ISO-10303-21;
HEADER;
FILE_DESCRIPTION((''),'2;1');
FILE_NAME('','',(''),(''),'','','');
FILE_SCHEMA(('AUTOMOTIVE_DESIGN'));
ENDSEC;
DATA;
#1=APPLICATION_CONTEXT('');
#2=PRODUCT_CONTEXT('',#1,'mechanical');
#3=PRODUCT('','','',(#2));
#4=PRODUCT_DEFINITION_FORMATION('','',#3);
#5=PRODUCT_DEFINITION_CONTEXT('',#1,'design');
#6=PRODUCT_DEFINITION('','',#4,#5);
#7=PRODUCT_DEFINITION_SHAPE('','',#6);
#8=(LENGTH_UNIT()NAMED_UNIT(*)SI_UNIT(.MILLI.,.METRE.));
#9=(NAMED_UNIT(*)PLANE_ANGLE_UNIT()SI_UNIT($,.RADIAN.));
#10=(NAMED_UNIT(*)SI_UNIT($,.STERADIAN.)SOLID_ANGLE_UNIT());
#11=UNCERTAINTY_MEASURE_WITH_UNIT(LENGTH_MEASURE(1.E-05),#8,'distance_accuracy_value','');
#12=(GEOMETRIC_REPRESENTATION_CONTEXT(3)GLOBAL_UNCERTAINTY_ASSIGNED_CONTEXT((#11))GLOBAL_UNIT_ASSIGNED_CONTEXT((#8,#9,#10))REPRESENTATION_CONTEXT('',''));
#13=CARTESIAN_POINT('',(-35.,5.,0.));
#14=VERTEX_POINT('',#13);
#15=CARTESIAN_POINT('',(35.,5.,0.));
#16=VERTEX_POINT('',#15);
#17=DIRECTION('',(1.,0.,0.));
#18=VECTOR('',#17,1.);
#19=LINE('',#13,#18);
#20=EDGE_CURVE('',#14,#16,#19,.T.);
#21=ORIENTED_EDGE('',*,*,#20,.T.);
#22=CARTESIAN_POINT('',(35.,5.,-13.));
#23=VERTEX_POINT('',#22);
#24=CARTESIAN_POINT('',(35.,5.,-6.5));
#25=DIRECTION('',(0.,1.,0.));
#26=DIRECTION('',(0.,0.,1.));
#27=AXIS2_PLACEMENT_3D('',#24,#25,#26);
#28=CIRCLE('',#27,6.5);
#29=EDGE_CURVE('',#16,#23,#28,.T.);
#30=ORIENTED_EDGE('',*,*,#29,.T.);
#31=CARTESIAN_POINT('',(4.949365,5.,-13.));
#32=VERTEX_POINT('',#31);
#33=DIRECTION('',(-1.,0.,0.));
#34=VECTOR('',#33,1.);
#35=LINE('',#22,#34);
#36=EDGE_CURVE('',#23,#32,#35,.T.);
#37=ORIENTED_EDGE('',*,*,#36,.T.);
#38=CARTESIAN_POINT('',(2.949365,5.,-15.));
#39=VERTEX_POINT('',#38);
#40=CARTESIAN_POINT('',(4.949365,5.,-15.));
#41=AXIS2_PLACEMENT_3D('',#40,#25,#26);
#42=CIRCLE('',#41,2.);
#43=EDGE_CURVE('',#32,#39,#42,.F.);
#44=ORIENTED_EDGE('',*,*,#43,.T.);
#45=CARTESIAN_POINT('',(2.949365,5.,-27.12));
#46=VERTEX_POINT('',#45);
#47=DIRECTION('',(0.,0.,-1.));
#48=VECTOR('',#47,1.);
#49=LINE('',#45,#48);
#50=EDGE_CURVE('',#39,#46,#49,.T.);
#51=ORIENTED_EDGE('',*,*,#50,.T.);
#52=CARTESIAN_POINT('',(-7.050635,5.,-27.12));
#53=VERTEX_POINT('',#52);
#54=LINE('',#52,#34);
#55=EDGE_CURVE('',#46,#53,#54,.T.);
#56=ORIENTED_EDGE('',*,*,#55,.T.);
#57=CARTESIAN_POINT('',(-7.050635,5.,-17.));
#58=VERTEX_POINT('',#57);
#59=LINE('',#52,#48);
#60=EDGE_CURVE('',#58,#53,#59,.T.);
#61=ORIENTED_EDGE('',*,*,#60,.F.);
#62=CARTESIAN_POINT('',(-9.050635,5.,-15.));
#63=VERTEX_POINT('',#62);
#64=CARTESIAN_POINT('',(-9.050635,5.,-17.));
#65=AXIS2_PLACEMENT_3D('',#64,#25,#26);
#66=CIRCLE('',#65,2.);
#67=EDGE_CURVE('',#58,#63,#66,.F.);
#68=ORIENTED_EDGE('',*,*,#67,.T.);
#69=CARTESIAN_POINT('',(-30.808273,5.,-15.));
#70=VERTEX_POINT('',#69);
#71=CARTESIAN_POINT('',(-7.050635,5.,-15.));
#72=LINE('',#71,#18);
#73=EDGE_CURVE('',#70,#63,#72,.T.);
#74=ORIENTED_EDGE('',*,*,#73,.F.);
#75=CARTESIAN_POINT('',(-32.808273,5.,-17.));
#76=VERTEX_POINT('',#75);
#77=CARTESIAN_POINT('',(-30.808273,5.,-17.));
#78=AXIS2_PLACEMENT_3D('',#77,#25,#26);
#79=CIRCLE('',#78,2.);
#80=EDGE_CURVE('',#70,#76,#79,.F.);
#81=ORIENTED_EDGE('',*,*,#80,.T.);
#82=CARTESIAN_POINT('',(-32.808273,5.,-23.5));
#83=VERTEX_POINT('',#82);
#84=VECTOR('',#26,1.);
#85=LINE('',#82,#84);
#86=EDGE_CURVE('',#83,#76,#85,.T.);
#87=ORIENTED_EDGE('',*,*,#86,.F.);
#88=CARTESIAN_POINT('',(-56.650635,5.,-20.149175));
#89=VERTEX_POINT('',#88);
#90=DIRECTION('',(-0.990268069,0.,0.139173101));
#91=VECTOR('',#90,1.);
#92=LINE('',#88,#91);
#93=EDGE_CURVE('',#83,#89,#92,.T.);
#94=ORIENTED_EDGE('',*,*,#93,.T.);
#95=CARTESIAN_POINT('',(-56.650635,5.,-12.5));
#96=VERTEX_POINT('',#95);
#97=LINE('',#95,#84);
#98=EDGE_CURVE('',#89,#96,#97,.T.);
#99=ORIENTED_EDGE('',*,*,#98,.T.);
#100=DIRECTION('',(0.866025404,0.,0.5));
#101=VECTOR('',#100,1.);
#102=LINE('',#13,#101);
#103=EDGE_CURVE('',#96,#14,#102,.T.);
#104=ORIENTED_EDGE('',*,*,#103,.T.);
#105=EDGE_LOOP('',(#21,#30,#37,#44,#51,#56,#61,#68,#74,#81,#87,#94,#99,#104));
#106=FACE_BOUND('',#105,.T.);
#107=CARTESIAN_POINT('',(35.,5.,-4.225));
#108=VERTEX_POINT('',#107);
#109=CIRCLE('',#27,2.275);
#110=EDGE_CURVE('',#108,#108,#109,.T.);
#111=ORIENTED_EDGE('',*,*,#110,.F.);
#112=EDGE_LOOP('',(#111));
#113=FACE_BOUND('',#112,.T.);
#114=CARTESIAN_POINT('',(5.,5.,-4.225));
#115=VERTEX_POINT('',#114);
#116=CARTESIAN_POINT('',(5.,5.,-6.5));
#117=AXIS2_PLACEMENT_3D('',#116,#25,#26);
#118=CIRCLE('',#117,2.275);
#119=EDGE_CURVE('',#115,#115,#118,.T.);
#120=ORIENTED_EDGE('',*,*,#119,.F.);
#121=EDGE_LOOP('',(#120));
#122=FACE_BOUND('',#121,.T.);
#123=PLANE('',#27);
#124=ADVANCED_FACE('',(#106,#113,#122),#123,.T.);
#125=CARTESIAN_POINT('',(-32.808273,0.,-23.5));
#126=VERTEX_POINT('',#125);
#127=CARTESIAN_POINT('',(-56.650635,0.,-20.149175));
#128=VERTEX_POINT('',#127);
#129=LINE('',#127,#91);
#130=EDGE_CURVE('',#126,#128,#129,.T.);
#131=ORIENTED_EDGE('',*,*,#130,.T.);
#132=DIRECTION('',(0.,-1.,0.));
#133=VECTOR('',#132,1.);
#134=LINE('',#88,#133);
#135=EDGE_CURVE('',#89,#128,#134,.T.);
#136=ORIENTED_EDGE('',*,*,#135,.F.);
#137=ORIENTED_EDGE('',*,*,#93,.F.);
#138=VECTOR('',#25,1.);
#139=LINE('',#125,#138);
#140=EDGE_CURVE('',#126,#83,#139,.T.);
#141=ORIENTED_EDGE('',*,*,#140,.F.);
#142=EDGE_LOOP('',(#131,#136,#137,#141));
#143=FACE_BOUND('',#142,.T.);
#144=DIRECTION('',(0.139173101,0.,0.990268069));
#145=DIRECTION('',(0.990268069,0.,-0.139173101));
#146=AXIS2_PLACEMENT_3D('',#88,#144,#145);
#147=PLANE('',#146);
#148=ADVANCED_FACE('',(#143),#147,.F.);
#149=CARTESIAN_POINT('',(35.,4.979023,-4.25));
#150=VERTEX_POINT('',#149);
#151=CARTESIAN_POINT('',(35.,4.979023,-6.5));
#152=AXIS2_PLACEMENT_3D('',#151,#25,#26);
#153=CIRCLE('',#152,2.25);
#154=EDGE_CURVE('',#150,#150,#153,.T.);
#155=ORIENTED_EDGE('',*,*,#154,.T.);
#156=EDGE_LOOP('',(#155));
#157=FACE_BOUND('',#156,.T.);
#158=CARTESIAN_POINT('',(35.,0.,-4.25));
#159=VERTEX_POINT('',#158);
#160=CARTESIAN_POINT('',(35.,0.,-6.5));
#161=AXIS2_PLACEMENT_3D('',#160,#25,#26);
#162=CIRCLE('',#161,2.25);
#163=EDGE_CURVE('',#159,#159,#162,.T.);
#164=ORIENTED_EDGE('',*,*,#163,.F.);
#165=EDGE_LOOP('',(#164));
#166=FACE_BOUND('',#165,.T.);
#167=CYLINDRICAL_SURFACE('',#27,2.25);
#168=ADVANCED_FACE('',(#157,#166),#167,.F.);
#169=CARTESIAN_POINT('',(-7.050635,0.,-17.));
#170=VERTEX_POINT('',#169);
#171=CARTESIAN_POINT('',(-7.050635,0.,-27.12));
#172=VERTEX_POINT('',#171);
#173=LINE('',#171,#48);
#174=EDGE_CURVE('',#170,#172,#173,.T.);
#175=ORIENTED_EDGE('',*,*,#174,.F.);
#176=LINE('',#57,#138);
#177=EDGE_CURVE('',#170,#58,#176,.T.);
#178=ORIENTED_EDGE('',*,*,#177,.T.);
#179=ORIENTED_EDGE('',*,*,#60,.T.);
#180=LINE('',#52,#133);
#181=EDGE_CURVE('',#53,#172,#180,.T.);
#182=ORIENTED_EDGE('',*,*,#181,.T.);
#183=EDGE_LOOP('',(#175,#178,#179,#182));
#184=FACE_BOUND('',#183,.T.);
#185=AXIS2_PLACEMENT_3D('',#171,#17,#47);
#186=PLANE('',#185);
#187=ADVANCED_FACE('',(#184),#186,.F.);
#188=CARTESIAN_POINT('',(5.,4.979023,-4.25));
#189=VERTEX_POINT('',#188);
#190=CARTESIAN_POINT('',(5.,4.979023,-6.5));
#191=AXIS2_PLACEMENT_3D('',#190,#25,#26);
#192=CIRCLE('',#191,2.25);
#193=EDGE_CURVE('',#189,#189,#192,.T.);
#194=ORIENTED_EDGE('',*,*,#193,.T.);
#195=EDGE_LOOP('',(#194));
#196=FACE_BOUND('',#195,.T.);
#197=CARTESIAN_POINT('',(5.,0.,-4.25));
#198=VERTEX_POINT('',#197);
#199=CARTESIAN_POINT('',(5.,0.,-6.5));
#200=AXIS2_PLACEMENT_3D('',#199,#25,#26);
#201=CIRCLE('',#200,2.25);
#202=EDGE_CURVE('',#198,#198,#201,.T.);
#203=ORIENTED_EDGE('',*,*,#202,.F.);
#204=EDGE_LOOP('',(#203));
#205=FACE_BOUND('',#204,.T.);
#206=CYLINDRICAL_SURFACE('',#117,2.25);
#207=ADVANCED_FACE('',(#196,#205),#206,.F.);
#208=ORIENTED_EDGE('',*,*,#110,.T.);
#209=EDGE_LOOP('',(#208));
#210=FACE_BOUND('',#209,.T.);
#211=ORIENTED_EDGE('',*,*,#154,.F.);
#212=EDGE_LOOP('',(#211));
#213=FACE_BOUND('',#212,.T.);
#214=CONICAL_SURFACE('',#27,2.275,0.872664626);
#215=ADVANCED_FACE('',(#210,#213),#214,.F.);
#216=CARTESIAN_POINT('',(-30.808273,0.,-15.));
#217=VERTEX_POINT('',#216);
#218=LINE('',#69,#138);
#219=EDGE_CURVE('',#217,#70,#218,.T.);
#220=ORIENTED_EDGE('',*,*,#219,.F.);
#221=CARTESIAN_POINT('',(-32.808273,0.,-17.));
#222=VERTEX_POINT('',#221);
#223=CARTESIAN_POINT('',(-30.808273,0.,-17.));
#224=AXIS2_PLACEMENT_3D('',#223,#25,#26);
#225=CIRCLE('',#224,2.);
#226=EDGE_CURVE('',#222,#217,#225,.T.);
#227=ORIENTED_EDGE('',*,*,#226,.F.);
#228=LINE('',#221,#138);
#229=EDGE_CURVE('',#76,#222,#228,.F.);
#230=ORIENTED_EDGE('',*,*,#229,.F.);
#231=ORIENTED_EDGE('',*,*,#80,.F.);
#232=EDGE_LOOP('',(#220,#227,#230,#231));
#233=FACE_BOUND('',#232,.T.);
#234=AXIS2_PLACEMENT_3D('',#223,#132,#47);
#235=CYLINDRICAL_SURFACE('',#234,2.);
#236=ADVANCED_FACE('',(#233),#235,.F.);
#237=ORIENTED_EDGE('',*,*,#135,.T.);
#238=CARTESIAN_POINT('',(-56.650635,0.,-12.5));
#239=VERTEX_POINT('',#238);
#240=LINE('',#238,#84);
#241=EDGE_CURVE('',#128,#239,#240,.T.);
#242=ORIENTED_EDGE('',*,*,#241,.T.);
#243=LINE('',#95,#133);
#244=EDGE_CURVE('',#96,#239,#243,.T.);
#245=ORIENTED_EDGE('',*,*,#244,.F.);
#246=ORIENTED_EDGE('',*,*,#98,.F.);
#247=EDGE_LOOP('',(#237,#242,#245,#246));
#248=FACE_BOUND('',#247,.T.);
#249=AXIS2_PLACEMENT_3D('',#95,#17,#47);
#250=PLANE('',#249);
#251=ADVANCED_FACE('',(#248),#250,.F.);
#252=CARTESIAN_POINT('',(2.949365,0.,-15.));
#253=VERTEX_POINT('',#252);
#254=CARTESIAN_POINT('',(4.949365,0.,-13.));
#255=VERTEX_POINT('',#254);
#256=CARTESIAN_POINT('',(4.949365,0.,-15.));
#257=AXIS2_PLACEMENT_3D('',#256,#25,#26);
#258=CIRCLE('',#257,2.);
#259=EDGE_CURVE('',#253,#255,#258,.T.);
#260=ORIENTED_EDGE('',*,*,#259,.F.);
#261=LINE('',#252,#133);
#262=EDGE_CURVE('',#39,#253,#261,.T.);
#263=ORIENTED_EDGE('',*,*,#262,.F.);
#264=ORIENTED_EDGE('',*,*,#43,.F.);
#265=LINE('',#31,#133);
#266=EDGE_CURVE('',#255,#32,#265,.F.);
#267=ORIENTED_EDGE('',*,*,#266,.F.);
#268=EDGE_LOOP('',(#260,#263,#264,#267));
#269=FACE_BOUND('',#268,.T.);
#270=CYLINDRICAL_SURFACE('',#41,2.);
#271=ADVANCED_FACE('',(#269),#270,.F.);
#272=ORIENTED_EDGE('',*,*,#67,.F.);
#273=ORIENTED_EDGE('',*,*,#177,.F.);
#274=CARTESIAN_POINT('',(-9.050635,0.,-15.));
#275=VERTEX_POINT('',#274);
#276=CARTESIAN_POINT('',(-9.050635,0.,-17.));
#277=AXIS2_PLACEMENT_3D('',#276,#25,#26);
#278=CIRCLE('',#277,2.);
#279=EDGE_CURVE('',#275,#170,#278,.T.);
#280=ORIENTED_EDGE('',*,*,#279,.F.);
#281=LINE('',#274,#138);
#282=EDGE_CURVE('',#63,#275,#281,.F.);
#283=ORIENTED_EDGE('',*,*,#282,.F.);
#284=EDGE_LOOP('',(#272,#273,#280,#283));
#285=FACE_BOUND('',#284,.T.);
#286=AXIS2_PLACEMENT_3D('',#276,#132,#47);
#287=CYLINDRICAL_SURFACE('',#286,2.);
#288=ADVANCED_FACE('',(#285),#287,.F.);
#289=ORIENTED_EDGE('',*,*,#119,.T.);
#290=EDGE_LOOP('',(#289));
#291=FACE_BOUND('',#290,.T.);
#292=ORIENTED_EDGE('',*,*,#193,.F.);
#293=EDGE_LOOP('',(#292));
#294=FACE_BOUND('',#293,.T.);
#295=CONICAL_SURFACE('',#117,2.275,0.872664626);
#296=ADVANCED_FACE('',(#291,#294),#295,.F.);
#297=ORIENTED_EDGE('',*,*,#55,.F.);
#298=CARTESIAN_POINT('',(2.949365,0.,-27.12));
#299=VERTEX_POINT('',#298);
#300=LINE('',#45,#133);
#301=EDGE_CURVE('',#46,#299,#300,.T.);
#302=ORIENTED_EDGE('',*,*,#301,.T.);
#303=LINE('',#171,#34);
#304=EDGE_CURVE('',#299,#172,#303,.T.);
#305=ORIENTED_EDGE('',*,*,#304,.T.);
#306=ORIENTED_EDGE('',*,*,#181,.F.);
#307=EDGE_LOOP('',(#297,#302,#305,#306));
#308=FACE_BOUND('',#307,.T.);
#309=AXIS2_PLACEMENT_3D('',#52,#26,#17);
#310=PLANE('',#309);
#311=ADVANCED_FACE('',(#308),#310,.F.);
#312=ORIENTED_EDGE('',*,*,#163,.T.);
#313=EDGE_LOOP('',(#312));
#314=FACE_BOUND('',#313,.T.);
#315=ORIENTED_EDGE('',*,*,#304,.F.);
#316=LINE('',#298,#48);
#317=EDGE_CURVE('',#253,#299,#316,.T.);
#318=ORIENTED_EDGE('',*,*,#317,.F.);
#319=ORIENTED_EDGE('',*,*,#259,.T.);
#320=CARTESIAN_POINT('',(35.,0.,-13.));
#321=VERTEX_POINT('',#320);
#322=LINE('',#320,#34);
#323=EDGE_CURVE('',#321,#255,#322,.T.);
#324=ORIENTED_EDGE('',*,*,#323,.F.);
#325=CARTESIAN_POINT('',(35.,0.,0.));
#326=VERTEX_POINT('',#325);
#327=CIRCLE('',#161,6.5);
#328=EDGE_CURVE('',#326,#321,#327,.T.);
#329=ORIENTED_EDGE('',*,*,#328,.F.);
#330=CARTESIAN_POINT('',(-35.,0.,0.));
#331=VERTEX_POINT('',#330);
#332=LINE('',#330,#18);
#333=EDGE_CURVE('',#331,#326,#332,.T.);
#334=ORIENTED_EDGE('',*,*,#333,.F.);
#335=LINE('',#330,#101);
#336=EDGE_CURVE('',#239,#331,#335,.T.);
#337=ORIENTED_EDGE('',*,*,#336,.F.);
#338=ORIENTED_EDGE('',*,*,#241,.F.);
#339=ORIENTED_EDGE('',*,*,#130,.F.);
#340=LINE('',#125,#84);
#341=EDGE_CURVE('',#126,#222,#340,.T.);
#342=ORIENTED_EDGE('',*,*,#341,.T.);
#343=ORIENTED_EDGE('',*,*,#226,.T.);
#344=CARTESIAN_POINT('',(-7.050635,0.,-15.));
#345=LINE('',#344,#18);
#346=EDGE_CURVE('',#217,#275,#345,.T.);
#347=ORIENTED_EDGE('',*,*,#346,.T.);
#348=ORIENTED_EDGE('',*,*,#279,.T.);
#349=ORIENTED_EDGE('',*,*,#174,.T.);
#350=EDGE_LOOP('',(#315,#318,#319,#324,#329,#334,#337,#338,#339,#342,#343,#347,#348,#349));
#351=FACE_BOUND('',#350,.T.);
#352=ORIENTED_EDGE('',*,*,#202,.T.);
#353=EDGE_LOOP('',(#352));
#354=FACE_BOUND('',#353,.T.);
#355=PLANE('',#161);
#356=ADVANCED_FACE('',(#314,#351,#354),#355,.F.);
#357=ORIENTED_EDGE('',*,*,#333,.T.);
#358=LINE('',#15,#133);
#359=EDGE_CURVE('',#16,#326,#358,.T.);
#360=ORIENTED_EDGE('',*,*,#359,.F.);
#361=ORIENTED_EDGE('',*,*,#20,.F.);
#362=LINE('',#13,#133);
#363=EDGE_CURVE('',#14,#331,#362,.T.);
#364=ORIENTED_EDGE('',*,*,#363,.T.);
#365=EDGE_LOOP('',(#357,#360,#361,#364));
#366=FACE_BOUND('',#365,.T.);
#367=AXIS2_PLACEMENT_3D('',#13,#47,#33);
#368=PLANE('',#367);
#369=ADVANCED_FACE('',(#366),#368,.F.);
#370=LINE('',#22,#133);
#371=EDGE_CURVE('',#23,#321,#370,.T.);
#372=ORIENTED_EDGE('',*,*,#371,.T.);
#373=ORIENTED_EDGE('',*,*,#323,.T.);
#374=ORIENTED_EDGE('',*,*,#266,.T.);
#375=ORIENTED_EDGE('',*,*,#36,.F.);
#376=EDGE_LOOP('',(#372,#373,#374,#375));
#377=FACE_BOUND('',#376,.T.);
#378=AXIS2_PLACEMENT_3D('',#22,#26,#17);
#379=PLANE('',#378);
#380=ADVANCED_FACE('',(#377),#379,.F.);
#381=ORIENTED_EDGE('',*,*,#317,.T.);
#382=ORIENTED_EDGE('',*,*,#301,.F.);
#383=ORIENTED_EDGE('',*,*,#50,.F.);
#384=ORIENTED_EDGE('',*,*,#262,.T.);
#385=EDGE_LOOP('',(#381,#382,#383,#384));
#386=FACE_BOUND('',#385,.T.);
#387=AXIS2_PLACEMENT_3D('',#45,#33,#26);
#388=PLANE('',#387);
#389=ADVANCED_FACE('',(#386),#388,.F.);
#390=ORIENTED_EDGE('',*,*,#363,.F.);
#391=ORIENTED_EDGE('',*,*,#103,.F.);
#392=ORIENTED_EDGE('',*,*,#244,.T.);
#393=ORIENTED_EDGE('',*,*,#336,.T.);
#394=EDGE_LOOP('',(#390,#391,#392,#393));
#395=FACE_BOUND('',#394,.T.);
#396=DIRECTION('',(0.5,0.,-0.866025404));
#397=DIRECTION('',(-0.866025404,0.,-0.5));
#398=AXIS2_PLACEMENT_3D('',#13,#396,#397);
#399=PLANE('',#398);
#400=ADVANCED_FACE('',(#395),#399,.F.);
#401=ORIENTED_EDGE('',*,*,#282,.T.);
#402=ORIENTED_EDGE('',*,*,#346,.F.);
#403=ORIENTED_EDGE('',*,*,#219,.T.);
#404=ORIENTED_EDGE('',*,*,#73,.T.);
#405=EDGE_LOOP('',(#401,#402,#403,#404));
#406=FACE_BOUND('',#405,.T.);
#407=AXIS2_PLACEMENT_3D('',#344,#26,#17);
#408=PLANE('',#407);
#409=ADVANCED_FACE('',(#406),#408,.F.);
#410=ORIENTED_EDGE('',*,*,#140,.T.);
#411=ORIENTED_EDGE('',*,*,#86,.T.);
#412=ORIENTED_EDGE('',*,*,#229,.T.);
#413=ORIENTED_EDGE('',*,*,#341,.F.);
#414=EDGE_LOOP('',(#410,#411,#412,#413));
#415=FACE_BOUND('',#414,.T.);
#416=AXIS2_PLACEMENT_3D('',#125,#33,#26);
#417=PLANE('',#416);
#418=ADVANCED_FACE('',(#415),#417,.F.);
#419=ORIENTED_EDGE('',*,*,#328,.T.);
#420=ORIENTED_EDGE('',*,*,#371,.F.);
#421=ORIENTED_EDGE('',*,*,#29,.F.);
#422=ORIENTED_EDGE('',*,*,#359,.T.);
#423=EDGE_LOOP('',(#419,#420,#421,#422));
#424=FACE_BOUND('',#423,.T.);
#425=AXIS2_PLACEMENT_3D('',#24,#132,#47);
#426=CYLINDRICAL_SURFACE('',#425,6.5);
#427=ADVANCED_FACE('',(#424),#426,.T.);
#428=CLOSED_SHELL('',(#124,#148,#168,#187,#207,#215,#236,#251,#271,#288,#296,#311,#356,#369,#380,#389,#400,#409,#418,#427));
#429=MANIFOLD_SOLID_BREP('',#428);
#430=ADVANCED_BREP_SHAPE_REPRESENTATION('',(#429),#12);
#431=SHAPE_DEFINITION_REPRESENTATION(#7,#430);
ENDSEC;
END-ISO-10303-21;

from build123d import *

# Parameters (mm, degrees)
BOSS_EXTRUDE1_DEPTH = 5
CUT_EXTRUDE1_DEPTH  = 64.006260456
FILLET2_R           = 2


# Read off the part's stored shape, not the designer's step: M4 Clearance Hole1
with BuildPart() as part:
    # Sketch1 → Boss-Extrude1 (new body)
    with BuildSketch(Plane(origin=(0, 0, 0), x_dir=(1, 0, 0), z_dir=(0, 1, 0))):
        with BuildLine():
            Line((-35, 0), (35, 0))
            ThreePointArc((35, 0), (41.5, 6.5), (35, 13))
            Line((35, 13), (2.949364905, 13))
            Line((2.949364905, 13), (2.949364905, 27.12))
            Line((2.949364905, 27.12), (-7.050635095, 27.12))
            Line((-7.050635095, 27.12), (-56.650635095, 20.149174599))
            Line((-56.650635095, 20.149174599), (-56.650635095, 12.5))
            Line((-56.650635095, 12.5), (-35, 0))
        make_face()
    extrude(amount=BOSS_EXTRUDE1_DEPTH)

    # M4 Clearance Hole1 outline → M4 Clearance Hole1 (revolve, cut)
    with BuildSketch(Plane(origin=(5, 0, -6.5), x_dir=(1, 0, 0), z_dir=(0, 0, 1))):
        Polygon((0, 0), (2.25, 0), (2.25, 4.979022509), (2.275, 5), (0, 5), align=None)
    revolve(axis=Axis((5, 0, -6.5), (0, 1, 0)), mode=Mode.SUBTRACT)

    # M4 Clearance Hole1 2 outline → M4 Clearance Hole1 2 (revolve, cut)
    with BuildSketch(Plane(origin=(35, 0, -6.5), x_dir=(1, 0, 0), z_dir=(0, 0, 1))):
        Polygon((0, 0), (2.25, 0), (2.25, 4.979022509), (2.275, 5), (0, 5), align=None)
    revolve(axis=Axis((35, 0, -6.5), (0, 1, 0)), mode=Mode.SUBTRACT)

    # Sketch4 → Cut-Extrude1 (cut, through all)
    with BuildSketch(Plane(origin=(0, 5, 0), x_dir=(1, 0, 0), z_dir=(0, 1, 0))):
        Polygon((-32.80827349, 23.5), (-7.050635095, 27.12), (-7.050635095, 15), (-32.80827349, 15), align=None)
    extrude(amount=-CUT_EXTRUDE1_DEPTH, mode=Mode.SUBTRACT)

    # Fillet2
    fillet2_edges = [part.edges().sort_by_distance(p)[0] for p in [
        (2.949364905, 2.5, -13),
        (-7.050635095, 2.5, -15),
        (-32.80827349, 2.5, -15),
    ]]
    fillet(fillet2_edges, radius=FILLET2_R)


solid = part.part
